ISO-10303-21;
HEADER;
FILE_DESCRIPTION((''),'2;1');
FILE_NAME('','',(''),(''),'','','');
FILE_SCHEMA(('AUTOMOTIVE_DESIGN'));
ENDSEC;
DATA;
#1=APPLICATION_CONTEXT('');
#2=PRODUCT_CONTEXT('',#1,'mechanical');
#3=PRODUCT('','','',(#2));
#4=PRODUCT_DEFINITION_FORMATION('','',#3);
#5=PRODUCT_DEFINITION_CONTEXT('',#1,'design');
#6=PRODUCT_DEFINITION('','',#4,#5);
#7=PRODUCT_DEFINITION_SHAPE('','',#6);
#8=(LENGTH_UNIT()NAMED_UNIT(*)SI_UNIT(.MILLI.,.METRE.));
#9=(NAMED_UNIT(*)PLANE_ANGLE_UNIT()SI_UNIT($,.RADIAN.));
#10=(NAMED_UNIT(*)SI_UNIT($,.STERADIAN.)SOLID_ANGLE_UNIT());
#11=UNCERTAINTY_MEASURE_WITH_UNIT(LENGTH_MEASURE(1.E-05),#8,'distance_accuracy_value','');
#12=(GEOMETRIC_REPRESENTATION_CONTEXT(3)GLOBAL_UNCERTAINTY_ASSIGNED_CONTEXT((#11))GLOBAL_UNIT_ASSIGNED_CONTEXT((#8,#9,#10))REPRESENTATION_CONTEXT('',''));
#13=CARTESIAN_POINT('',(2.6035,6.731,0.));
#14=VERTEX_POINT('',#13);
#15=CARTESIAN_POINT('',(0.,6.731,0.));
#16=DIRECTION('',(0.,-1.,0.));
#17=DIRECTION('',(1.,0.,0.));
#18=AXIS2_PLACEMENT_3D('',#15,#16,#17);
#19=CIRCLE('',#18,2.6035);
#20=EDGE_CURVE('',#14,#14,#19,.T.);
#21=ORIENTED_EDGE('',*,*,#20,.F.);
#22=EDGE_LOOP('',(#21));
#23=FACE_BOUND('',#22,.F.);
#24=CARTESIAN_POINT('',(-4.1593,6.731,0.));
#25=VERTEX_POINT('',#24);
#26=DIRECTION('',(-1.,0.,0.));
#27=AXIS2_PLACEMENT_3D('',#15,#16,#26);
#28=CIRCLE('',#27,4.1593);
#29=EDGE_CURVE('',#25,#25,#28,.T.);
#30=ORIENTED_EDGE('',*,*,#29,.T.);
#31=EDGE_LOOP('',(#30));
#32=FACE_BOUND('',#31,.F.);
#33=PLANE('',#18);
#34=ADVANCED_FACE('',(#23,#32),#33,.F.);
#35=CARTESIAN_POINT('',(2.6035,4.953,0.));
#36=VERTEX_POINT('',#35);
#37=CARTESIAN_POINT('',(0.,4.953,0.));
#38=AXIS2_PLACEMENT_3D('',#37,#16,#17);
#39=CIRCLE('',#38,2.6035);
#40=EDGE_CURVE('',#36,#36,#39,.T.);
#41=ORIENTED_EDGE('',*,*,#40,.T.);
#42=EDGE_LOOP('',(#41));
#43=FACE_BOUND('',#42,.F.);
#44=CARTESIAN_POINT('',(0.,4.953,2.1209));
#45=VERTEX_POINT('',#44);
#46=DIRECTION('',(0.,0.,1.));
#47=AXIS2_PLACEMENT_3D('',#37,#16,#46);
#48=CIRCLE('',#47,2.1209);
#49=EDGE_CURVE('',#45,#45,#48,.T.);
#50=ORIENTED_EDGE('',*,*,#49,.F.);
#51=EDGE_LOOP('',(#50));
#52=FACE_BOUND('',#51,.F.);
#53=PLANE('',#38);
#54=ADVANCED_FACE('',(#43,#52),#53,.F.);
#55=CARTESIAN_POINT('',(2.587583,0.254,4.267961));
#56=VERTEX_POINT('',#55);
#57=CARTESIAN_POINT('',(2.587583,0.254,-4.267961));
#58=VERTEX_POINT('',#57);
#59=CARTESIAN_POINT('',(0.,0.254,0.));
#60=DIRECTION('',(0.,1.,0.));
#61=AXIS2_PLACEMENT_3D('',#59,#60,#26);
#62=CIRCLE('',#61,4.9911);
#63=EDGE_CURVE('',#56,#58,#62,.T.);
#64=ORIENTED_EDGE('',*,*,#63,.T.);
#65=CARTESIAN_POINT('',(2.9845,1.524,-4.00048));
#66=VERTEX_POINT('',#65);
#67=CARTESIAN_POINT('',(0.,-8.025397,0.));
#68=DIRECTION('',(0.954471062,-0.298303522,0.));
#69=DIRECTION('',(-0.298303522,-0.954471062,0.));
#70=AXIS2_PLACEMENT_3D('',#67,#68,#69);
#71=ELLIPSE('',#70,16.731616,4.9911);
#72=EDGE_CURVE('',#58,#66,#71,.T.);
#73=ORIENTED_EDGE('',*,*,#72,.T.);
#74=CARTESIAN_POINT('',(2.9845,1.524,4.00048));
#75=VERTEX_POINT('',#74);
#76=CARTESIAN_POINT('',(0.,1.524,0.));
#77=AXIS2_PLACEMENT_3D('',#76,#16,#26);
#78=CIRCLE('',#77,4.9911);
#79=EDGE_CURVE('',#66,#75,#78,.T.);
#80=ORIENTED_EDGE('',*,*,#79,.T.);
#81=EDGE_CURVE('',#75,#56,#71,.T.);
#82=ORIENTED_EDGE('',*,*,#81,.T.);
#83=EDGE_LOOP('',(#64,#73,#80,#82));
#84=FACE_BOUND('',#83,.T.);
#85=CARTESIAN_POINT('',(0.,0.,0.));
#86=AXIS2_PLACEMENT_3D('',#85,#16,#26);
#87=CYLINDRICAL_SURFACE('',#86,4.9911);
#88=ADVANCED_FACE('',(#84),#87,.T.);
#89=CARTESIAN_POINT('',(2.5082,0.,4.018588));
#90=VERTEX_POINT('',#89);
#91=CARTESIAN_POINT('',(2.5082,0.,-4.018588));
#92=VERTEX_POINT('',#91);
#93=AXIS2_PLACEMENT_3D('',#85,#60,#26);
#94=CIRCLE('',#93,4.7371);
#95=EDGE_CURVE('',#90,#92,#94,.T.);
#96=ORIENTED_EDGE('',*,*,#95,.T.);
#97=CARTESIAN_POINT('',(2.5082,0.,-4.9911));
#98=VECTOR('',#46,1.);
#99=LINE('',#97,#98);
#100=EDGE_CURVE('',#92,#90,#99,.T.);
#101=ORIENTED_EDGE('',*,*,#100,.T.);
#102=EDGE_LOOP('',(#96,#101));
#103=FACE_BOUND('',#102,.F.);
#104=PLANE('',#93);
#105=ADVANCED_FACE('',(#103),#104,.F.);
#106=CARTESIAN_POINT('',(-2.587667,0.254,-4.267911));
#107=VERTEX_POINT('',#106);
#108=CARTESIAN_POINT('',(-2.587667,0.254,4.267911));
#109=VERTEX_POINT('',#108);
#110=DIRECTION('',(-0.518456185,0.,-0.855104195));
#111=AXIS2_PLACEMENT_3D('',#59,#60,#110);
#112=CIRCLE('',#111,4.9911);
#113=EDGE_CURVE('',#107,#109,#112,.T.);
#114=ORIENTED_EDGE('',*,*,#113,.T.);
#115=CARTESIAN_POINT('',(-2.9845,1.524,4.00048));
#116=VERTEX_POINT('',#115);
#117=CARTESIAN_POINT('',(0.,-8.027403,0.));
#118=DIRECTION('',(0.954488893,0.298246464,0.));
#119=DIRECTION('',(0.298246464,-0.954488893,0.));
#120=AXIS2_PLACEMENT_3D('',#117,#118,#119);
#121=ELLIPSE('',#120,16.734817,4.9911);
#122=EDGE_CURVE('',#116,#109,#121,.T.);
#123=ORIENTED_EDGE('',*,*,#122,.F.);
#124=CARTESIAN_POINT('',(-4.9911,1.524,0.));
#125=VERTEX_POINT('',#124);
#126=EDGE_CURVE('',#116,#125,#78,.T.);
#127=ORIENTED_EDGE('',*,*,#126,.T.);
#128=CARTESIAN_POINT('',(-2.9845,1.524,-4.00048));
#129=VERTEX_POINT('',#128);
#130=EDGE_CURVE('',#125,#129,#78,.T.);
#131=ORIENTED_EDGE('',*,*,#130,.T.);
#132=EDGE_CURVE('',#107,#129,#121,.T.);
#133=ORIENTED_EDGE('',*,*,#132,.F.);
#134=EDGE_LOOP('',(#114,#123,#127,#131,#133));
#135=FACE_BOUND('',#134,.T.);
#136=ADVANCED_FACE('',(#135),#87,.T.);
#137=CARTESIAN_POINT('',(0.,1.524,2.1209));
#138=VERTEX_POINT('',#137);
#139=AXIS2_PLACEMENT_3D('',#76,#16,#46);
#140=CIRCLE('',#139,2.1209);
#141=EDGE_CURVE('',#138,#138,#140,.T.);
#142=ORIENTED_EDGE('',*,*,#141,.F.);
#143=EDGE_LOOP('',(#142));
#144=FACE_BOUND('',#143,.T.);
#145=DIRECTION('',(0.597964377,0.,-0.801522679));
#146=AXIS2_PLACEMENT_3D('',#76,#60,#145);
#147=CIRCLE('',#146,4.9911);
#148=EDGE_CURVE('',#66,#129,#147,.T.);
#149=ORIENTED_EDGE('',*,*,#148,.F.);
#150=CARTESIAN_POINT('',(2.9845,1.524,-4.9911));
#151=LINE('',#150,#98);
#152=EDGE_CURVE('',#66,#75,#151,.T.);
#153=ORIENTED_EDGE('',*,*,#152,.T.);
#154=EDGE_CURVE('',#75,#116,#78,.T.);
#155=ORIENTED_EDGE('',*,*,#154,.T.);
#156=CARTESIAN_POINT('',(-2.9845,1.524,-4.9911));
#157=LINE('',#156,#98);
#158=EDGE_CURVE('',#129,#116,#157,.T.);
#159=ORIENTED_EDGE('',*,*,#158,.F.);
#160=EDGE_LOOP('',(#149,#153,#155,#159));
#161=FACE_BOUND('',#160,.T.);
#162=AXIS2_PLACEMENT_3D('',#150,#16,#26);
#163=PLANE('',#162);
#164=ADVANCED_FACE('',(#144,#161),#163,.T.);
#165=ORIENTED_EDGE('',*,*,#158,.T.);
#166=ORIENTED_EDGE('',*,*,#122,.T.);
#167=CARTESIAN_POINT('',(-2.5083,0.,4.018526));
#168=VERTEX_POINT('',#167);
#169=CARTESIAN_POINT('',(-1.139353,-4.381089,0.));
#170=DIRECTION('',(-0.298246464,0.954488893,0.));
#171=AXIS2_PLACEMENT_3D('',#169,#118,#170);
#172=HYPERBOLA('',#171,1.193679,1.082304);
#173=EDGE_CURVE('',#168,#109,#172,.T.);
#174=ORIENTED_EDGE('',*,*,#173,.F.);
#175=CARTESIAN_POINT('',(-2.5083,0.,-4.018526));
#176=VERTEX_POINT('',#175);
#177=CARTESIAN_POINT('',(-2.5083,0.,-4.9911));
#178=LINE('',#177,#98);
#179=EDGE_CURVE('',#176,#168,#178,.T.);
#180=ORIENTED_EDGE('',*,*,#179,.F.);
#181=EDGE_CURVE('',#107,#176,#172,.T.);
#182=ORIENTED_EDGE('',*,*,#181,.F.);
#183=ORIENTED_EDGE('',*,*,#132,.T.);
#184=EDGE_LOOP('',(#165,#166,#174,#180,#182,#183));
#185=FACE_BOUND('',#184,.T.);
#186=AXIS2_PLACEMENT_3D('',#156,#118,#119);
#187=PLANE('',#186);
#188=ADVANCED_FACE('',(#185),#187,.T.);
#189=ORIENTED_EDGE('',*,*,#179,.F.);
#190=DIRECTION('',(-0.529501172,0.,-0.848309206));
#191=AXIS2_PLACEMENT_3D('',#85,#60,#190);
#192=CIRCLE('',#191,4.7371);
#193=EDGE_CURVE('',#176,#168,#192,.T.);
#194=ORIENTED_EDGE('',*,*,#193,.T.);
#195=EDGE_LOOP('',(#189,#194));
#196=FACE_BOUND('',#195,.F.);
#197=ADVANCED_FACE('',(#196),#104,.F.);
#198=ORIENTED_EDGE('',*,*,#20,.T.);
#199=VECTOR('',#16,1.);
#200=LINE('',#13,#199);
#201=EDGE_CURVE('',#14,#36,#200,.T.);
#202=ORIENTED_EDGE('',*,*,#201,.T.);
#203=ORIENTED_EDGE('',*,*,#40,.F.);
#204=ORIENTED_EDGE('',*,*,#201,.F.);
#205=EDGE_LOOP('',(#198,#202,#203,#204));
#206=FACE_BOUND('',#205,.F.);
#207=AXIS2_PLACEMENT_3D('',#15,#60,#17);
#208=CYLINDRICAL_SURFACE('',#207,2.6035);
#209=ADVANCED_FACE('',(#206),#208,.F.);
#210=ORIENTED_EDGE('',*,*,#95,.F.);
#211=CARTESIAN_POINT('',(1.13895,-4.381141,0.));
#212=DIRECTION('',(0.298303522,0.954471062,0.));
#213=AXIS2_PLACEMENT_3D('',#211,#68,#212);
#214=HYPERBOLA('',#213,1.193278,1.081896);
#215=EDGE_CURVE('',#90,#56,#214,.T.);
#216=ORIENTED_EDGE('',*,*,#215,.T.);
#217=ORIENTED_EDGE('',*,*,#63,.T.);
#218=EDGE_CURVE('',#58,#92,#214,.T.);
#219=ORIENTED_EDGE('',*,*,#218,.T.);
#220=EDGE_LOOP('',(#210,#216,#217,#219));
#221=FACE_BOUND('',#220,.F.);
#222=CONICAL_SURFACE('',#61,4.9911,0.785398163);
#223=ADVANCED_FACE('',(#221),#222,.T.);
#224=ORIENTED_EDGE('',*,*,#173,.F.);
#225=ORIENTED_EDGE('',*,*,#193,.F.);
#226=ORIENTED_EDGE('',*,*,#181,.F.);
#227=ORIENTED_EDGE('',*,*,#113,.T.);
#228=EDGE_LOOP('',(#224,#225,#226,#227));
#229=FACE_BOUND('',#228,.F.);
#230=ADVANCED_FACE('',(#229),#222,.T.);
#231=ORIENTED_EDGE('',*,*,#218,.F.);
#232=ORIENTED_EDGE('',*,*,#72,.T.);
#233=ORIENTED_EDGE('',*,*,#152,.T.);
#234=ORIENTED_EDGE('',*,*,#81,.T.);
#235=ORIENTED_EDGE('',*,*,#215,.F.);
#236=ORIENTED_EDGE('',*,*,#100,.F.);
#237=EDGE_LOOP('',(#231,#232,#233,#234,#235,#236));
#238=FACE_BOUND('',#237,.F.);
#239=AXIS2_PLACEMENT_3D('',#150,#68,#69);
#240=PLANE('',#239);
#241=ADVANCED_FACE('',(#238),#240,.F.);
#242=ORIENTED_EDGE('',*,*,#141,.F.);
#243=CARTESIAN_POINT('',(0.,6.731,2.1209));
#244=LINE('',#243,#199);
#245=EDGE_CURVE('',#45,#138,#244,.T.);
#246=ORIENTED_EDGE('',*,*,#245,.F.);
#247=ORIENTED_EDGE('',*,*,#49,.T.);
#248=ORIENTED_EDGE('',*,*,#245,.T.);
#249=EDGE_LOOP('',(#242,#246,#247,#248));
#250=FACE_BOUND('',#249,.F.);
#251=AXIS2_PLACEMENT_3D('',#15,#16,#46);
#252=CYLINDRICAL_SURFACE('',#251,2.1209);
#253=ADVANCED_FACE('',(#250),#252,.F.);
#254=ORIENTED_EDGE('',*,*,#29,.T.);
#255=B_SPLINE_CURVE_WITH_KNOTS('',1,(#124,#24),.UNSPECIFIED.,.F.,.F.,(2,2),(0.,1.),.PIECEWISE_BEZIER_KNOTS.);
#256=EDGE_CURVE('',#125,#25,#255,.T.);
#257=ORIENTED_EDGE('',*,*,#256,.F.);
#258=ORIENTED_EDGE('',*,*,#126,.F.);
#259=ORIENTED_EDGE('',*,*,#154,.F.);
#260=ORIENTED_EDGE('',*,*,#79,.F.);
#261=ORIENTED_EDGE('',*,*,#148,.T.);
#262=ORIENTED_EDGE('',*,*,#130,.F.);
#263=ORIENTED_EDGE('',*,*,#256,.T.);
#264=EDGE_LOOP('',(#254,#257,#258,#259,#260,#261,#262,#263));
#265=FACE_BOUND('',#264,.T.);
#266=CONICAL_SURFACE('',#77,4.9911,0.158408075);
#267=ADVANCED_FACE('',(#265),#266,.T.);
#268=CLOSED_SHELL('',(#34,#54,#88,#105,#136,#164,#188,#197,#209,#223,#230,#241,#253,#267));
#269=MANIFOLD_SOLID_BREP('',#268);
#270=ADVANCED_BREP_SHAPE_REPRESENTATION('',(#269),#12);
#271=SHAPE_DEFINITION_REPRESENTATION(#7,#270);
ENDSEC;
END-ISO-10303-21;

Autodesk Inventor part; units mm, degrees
ref_plane "YZ Plane" through (0, 0, 0) normal (1, 0, 0) x (0, 1, 0)
sketch "Sketch1" plane through (0, 0, 0) normal (0, 1, 0) x (-1, 0, 0)
  circle A0 centre (0, 0) radius 4.9911
  dimension "d0" = 9.9822
extrude "Extrusion1" add sketch "Sketch1" along normal blind 1.524
sketch "Sketch2" plane through (0, 1.524, 0) normal (0, 1, 0) x (1, 0, 0)
  point P0 (0, 0)
ref_plane "Work Plane1" through (0, 6.731, 0) normal (0, -1, 0) x (1, 0, 0)
sketch "Sketch3" plane through (0, 6.731, 0) normal (0, -1, 0) x (1, 0, 0)
  circle A0 centre (0, 0) radius 4.1593
  circle A1 centre (0, 0) radius 2.6035
  dimension "d4" = 8.3185
  dimension "d9" = 5.207
loft "Loft1" add profiles "Sketch3" section 1 edges at (4.9911, 1.524, 0) contours A0 | A1
hole "Hole1" at (0, 6.731, 0) direction (0, -1, 0) diameter 4.2418 end through all thread size "10-48 UNS" class "2B" standard "ANSI Unified Screw Threads"
extrude "Extrusion3" cut sketch "Sketch3" along normal blind 1.778 contours A1
ref_plane "Work Plane2" through (0, 0, -4.9911) normal (0, 0, 1) x (1, 0, 0)
chamfer "Chamfer1" distance 0.254 angle 45 1 edges at (4.9911, 0, 0)
sketch "Sketch4" plane through (0, 0, -4.9911) normal (0, 0, 1) x (1, 0, 0)
  line L0 (4.9911, 1.524) -> (-4.9911, 1.524) projected
  line L1 (0, 1.524) -> (0, 0)
  line L2 (2.5082, 1.524) -> (-2.5083, 1.524)
  line L3 (-2.5083, 1.524) -> (-2.5083, 0)
  line L4 (-2.5083, 0) -> (2.5082, 0)
  line L5 (2.5082, 0) -> (2.5082, 1.524)
  line L6 (2.5082, 1.524) -> (-2.5083, 0) construction
  line L7 (-2.5083, 1.524) -> (2.5082, 0) construction
  line L8 (2.9845, 1.524) -> (-2.9845, 1.524)
  line L9 (-2.9845, 1.524) -> (-2.9845, 0)
  line L10 (-2.9845, 0) -> (2.9845, 0)
  line L11 (2.9845, 0) -> (2.9845, 1.524)
  line L12 (2.9845, 1.524) -> (-2.9845, 0) construction
  line L13 (-2.9845, 1.524) -> (2.9845, 0) construction
  line L14 (2.9845, 1.524) -> (2.5082, 0)
  line L15 (-2.9845, 1.524) -> (-2.5083, 0)
  point P0 (4.9911, 0)
  point P1 (-4.9911, 0)
  point P2 (0, 0.762)
  dimension "d23" = 5.0165
  dimension "d24" = 5.969
extrude "Extrusion4" cut sketch "Sketch4" along normal through all contours L14 L5 L0 | L5 L4 L1 L0 | L1 L4 L3 L0 | L3 L15 L0
properties part number "0.375 Shaft Dovetail" material "Stainless Steel"
